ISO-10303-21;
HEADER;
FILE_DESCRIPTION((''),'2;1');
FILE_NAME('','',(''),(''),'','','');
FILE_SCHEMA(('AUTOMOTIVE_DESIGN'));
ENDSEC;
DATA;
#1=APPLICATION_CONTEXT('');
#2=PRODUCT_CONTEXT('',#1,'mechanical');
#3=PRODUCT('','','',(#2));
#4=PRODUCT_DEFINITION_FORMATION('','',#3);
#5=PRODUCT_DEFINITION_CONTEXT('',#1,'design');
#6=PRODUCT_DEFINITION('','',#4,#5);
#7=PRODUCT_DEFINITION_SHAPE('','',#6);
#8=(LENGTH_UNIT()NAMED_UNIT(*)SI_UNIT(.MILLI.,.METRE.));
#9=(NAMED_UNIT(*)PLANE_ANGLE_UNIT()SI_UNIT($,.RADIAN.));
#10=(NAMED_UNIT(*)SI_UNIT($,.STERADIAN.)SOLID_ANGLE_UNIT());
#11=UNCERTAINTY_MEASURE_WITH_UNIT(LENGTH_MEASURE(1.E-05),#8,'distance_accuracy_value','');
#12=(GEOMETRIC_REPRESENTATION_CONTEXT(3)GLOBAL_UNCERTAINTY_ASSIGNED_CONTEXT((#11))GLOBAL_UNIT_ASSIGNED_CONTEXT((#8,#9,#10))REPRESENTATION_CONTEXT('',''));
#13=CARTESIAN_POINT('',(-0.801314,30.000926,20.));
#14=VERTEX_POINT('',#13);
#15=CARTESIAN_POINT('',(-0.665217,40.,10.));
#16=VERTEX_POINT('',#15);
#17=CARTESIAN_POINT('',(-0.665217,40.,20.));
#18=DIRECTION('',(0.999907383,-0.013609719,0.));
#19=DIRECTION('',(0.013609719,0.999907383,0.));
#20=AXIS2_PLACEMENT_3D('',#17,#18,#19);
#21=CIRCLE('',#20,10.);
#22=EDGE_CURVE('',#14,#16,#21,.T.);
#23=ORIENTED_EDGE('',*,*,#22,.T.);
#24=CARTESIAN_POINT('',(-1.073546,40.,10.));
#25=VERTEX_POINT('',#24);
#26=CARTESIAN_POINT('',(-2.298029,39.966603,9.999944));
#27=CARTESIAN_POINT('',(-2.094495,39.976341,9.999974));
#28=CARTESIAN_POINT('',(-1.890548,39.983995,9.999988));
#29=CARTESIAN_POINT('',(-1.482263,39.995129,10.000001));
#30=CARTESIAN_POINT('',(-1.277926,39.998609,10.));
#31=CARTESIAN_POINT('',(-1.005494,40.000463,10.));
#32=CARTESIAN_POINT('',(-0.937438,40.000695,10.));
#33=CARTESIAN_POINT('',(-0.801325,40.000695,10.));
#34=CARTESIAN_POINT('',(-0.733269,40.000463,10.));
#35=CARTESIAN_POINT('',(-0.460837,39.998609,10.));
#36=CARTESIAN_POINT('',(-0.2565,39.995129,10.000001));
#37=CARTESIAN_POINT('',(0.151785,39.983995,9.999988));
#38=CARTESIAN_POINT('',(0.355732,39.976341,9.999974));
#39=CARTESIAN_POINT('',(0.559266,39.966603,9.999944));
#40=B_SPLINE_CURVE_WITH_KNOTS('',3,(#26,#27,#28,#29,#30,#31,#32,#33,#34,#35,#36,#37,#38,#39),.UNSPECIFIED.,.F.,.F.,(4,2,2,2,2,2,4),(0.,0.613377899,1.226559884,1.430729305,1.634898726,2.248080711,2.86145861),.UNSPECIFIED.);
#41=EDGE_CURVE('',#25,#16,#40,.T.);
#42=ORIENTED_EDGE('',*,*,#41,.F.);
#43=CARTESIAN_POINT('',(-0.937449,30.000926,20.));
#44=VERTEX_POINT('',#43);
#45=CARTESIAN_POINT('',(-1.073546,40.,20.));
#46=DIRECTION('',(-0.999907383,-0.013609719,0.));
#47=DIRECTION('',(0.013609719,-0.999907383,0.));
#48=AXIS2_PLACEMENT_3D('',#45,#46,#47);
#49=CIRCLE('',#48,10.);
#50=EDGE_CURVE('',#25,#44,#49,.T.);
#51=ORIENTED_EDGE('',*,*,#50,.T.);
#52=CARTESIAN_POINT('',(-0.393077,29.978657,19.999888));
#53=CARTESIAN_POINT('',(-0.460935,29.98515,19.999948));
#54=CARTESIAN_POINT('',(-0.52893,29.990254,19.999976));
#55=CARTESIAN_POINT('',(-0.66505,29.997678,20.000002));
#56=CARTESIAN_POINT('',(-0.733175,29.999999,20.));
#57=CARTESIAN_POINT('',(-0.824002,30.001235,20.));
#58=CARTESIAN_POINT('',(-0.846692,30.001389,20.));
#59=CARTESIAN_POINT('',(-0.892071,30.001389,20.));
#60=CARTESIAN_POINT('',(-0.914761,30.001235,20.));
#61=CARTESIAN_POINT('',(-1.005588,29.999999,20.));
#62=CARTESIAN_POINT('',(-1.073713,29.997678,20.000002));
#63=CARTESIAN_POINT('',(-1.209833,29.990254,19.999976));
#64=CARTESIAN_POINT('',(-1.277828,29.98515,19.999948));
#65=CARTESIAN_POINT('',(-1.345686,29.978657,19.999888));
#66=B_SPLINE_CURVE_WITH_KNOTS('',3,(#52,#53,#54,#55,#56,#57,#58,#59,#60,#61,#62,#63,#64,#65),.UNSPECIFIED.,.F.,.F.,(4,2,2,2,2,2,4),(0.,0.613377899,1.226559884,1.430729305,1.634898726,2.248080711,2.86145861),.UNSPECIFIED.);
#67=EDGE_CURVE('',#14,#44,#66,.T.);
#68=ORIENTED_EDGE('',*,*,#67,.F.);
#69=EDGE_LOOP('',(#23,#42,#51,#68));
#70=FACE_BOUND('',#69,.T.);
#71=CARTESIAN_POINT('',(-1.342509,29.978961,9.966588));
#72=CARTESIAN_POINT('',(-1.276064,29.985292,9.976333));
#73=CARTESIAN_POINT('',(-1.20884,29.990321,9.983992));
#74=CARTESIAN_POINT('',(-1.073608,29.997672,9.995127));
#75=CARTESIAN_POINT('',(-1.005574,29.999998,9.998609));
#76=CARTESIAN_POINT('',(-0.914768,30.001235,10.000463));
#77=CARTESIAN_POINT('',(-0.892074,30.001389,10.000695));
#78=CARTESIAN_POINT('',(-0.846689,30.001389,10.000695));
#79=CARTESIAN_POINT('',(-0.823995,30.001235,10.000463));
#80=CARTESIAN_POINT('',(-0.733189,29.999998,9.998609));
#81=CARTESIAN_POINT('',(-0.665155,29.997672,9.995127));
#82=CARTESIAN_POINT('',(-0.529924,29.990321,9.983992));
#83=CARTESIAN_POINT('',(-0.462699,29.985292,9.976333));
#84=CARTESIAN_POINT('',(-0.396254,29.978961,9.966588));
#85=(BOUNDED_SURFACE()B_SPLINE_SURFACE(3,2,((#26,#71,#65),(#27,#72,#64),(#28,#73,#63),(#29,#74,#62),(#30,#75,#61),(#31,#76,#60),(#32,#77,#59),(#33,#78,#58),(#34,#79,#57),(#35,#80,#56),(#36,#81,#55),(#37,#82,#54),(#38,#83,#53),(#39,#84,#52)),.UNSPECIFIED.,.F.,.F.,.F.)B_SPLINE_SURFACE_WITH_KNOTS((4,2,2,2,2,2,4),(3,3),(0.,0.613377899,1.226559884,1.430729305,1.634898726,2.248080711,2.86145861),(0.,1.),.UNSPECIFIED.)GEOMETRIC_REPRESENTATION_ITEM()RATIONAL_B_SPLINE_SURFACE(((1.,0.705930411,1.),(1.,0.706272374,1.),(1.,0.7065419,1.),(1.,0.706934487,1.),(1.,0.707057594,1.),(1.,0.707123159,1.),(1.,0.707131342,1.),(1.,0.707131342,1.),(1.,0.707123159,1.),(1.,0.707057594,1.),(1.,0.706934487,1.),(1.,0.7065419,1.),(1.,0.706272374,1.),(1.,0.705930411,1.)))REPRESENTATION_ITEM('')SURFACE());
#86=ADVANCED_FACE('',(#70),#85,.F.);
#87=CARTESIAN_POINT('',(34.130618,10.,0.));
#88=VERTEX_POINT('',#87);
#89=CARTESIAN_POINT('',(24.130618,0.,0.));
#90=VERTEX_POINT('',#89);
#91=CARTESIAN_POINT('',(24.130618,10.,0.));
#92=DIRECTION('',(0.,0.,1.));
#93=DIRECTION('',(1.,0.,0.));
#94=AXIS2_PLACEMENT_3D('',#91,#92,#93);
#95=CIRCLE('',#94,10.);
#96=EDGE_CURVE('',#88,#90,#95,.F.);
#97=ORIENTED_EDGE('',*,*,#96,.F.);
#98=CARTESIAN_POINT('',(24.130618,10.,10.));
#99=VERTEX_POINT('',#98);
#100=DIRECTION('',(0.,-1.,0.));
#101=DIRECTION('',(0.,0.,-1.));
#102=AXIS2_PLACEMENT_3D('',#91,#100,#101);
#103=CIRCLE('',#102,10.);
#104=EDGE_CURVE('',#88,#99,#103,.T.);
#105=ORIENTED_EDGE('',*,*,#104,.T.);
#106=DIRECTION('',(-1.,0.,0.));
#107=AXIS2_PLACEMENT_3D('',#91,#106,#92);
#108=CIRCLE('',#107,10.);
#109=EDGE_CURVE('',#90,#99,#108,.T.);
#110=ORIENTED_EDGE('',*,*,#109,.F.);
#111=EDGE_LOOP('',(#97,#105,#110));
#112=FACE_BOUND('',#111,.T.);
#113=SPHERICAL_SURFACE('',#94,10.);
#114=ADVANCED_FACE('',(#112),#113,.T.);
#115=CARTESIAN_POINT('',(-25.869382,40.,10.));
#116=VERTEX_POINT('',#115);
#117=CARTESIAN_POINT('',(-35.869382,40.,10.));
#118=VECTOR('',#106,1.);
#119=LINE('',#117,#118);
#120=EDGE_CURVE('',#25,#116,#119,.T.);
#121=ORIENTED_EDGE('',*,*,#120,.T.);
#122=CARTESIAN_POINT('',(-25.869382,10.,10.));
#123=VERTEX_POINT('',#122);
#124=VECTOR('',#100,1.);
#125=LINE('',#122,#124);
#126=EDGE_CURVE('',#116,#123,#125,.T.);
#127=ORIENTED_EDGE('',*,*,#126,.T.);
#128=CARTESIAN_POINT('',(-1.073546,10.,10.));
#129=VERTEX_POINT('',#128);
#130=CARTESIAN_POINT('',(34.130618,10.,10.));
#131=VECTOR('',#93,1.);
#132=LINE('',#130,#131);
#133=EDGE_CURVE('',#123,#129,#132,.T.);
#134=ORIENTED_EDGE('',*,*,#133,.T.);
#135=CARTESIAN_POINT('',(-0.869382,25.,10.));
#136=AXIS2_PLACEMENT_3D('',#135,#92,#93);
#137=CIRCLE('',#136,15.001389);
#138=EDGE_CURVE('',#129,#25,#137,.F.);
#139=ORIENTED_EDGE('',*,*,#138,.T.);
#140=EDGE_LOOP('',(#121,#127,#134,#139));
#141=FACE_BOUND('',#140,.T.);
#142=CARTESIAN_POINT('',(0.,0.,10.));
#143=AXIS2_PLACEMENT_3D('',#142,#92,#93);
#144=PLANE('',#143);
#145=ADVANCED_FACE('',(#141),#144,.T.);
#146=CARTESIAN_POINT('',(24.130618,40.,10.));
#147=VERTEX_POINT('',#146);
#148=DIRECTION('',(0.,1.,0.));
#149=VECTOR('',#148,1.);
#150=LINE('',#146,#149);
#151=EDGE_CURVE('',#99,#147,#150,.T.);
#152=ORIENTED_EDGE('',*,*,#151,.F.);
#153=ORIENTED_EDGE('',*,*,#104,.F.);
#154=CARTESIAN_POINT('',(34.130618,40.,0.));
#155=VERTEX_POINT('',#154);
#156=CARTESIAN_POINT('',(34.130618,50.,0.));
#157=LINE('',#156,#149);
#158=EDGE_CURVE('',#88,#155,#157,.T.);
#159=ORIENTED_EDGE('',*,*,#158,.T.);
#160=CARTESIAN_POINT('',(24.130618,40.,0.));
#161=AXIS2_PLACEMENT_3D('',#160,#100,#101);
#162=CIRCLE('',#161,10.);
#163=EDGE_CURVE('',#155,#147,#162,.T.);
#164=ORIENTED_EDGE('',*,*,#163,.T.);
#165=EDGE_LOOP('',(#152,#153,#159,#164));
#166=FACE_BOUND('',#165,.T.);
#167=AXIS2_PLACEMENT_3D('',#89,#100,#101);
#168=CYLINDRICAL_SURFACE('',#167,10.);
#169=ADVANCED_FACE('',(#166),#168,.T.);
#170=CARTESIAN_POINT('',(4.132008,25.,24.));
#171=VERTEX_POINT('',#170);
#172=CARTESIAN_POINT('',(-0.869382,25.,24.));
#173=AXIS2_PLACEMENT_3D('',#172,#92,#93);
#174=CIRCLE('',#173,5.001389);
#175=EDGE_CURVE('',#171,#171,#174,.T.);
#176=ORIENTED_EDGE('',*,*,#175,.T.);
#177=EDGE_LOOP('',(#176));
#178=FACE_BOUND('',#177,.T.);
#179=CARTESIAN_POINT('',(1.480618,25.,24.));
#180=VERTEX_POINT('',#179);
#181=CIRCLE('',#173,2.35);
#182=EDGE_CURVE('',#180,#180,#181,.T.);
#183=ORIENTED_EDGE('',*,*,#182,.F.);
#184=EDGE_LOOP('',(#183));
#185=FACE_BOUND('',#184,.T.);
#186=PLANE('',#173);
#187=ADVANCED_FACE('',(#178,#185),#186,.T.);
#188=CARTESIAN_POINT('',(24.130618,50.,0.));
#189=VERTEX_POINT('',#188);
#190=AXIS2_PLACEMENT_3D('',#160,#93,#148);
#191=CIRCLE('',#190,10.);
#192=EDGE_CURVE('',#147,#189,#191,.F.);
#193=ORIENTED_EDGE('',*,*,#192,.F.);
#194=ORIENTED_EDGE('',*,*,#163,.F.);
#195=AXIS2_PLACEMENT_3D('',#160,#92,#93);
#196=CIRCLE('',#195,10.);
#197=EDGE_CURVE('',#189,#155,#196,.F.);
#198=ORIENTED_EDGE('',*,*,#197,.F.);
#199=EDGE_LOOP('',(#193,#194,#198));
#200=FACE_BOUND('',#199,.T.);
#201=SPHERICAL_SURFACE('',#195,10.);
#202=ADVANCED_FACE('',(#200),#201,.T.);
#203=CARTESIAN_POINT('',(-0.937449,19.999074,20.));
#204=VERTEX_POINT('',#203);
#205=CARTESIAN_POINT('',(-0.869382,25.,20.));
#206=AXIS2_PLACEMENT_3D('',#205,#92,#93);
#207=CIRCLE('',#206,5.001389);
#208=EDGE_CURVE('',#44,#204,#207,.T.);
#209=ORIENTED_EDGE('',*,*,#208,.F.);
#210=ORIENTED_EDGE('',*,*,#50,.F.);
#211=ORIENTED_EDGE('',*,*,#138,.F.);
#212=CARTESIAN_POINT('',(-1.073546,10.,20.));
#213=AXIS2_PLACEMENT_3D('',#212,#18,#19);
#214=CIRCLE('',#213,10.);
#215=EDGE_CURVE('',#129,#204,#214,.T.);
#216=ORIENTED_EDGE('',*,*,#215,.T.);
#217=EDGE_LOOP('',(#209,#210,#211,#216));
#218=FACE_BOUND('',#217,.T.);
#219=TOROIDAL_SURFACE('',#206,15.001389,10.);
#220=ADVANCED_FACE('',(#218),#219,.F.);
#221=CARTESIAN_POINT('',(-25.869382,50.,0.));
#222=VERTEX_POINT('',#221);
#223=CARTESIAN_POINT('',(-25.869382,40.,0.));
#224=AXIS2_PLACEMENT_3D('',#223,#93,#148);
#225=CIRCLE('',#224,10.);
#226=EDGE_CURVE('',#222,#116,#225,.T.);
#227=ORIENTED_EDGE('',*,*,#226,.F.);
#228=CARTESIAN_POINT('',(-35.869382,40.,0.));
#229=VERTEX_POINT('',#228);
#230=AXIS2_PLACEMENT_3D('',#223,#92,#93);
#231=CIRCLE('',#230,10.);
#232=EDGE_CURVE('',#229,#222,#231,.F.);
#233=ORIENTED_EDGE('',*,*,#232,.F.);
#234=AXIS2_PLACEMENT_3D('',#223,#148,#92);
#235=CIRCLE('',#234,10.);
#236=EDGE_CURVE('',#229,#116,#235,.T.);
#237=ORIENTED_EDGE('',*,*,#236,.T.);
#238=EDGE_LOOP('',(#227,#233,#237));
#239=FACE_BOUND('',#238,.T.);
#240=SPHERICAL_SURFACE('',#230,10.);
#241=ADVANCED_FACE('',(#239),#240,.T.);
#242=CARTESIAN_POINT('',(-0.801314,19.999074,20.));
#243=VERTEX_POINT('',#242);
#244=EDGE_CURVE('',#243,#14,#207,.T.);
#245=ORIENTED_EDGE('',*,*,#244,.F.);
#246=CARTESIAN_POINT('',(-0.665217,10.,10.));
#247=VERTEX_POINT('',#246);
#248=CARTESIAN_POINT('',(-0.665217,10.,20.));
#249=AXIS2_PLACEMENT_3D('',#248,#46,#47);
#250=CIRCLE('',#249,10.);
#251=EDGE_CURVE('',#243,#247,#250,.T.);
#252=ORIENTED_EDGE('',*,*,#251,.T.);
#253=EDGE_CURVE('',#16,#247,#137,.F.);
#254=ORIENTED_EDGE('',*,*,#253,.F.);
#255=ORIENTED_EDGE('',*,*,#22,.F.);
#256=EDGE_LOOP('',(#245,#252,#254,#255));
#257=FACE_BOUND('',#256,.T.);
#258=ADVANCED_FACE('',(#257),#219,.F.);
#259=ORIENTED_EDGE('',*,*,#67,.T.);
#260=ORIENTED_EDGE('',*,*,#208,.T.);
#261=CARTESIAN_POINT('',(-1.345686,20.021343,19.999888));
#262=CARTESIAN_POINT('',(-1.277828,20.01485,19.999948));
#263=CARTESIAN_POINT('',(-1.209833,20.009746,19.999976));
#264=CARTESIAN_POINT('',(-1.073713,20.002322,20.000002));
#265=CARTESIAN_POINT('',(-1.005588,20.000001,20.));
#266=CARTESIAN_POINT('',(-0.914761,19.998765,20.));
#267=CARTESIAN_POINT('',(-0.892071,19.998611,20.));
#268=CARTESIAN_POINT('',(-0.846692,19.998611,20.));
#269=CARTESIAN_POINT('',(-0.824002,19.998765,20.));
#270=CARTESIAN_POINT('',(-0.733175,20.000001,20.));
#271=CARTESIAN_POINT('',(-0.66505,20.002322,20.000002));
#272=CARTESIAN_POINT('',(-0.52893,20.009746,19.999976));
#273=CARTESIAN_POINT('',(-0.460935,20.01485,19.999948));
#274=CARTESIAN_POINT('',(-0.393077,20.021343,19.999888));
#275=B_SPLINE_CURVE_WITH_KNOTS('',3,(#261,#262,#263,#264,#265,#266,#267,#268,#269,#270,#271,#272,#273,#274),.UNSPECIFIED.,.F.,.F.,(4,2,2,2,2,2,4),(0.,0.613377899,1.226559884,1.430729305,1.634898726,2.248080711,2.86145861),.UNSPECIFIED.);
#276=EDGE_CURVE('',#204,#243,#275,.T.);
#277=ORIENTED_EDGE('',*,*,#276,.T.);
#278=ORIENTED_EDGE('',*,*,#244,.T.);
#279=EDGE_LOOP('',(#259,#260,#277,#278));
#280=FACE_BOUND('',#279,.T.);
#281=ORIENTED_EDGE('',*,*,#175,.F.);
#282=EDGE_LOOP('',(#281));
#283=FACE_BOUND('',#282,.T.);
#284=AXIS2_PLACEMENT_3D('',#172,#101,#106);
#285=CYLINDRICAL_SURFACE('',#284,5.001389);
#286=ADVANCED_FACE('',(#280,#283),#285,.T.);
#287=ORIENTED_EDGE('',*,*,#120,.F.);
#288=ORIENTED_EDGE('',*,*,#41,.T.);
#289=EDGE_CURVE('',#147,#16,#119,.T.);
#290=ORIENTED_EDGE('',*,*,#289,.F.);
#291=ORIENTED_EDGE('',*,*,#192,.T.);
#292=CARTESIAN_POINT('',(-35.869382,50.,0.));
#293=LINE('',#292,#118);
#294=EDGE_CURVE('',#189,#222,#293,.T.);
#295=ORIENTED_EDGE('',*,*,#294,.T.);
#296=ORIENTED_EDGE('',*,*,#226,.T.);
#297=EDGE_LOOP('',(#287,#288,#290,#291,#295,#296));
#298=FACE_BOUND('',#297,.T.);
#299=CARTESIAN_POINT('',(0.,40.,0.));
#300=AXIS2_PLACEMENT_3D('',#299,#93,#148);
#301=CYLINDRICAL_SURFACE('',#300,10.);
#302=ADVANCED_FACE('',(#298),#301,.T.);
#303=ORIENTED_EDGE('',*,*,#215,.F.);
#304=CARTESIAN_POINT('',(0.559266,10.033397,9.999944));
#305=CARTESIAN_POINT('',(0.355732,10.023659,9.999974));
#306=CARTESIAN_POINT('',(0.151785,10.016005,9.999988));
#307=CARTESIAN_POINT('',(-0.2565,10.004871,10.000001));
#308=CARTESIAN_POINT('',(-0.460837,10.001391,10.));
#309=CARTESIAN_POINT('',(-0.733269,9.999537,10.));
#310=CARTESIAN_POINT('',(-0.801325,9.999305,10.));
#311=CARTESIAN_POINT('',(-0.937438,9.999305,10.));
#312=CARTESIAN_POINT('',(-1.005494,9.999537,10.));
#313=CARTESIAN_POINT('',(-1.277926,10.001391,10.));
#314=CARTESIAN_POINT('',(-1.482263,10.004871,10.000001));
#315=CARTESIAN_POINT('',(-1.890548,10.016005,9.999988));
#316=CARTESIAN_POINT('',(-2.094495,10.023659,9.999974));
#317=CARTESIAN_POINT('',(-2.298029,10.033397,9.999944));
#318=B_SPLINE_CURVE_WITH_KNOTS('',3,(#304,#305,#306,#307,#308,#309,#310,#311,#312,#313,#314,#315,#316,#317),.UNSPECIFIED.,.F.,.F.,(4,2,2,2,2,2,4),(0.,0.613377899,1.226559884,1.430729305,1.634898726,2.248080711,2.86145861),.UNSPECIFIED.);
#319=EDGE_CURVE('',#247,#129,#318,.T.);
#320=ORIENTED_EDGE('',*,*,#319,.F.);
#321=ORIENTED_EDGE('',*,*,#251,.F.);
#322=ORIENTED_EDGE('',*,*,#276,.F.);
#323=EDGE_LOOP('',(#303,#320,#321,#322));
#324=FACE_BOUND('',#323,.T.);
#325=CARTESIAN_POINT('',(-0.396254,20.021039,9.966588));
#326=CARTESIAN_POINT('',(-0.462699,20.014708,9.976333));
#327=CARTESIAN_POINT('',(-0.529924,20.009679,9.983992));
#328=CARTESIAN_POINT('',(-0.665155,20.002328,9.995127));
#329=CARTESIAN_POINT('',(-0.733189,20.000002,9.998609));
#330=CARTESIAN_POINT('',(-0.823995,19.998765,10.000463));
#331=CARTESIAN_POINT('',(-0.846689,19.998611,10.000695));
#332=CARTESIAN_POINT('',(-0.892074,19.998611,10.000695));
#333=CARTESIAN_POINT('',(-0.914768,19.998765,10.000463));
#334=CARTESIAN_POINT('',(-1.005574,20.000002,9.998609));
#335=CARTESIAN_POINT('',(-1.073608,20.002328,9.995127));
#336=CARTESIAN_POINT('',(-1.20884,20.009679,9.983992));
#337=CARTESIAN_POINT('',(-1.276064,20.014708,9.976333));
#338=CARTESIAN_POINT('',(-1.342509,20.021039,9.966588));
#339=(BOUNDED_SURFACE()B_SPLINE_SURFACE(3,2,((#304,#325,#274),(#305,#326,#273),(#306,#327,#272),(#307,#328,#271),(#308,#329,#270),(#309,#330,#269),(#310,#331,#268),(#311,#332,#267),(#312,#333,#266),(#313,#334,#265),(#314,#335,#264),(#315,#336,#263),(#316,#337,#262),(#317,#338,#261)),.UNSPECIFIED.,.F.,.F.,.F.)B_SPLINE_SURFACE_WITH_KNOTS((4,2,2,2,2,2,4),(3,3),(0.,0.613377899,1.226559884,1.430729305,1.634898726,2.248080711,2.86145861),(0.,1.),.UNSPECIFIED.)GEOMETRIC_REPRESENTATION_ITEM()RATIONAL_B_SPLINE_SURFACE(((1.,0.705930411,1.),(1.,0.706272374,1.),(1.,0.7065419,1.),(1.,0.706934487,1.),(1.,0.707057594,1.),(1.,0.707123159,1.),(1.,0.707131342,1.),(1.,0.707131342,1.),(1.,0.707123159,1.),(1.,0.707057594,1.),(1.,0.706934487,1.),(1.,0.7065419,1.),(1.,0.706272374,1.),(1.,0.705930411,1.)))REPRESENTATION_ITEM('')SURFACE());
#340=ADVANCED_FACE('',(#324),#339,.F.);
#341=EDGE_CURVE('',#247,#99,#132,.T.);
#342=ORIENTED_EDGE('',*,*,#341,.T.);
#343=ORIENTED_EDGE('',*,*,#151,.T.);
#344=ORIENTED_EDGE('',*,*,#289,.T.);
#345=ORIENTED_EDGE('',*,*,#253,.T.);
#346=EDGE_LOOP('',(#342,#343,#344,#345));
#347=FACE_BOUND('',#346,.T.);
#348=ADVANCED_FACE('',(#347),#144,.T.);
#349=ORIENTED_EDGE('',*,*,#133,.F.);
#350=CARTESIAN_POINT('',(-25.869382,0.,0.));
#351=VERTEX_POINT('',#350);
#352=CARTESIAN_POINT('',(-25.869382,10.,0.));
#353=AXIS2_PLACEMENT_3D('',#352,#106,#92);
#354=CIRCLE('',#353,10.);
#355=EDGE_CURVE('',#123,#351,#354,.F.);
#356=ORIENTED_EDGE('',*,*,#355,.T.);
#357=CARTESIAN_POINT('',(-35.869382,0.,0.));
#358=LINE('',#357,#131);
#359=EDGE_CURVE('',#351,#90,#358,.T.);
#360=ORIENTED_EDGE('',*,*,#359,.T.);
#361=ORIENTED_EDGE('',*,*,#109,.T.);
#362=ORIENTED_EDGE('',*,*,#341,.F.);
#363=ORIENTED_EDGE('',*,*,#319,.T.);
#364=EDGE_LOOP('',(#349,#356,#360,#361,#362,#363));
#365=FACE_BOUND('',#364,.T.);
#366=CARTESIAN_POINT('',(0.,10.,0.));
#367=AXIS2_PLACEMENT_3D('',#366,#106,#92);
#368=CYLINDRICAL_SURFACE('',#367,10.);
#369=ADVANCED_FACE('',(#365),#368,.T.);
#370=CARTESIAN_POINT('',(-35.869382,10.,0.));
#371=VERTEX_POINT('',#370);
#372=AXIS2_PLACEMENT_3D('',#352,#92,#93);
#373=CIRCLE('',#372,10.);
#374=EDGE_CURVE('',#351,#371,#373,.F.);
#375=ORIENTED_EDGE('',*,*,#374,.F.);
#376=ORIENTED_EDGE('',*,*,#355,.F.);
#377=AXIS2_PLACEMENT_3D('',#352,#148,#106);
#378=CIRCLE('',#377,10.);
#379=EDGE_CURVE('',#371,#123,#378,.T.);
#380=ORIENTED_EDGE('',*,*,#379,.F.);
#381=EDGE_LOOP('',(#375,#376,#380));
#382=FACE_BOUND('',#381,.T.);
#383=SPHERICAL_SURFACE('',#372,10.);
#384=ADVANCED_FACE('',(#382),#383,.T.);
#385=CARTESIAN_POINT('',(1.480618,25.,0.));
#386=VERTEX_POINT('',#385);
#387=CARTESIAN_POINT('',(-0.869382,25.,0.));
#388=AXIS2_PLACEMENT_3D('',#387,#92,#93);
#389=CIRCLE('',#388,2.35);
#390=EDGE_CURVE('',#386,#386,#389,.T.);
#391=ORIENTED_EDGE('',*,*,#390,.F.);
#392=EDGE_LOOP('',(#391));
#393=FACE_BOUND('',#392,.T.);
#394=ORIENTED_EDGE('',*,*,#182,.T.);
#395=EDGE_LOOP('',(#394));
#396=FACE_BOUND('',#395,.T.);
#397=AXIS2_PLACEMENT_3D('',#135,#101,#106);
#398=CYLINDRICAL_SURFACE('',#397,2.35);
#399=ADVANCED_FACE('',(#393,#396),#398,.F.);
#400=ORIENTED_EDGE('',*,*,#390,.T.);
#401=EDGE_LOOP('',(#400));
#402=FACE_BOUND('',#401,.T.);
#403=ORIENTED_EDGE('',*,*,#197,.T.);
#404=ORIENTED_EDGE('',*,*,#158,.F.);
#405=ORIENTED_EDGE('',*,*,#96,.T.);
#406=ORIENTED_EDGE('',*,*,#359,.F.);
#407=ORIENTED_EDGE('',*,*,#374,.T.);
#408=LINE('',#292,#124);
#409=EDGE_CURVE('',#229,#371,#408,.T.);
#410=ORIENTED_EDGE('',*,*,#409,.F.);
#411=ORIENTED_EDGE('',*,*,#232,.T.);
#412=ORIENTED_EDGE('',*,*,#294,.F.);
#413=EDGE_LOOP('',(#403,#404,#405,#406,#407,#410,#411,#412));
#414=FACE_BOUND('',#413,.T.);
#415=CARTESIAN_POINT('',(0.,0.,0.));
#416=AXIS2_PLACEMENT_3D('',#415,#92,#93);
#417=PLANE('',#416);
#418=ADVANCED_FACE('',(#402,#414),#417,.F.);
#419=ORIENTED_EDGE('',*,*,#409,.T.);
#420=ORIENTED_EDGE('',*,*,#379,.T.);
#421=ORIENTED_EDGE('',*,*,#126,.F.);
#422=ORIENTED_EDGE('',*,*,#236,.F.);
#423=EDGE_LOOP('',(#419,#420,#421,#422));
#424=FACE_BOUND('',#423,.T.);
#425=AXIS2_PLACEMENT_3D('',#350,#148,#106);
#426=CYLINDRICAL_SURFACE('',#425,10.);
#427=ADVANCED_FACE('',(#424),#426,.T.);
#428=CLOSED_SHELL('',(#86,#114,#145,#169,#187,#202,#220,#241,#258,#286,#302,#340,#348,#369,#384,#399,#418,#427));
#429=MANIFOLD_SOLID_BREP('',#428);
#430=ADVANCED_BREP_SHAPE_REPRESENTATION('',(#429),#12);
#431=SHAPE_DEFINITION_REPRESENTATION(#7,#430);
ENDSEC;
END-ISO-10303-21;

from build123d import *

# Parameters (mm, degrees)
ESBO_O1_W                = 70
ESBO_O1_H                = 50
ESBO_O1_R                = 2.35
RESSALTO_EXTRUS_O1_DEPTH = 10
ESBO_O2_R                = 5.001389376
ESBO_O2_R_2              = 2.35
RESSALTO_EXTRUS_O2_DEPTH = 24
FILETE1_R                = 10
FILETE2_R                = 10
FILETE3_R                = 10
FILETE4_R                = 10
FILETE5_R                = 10


with BuildPart() as part:
    # Esboço1 → Ressalto-extrusão1 (new body)
    with BuildSketch(Plane.XY):
        with Locations((-0.869381548, 25)):
            Rectangle(ESBO_O1_W, ESBO_O1_H)
        with Locations((-0.869381548, 25)):
            Circle(ESBO_O1_R, mode=Mode.SUBTRACT)
    extrude(amount=RESSALTO_EXTRUS_O1_DEPTH)

    # Esboço2 → Ressalto-extrusão2 (add)
    with BuildSketch(Plane.XY):
        with Locations(Location((-0.869381548, 25, 0), (0, 0, 180))):
            Circle(ESBO_O2_R)
        with Locations((-0.869381548, 25)):
            Circle(ESBO_O2_R_2, mode=Mode.SUBTRACT)
    extrude(amount=RESSALTO_EXTRUS_O2_DEPTH)

    # Filete1
    filete1_edges = [part.edges().sort_by_distance(p)[0] for p in [
        (-0.869381548, 0, 10),
    ]]
    fillet(filete1_edges, radius=FILETE1_R - 0.0001)  # a hair under: the kernel refuses the full size

    # Filete2
    filete2_edges = [part.edges().sort_by_distance(p)[0] for p in [
        (-0.869381548, 50, 10),
    ]]
    fillet(filete2_edges, radius=FILETE2_R - 0.0001)  # a hair under: the kernel refuses the full size

    # Filete3
    filete3_edges = [part.edges().sort_by_distance(p)[0] for p in [
        (-35.869381548, 2.928902899, 7.071097101),
        (-35.869381548, 25, 10),
        (-35.869381548, 47.071097101, 7.071097101),
    ]]
    fillet(filete3_edges, radius=FILETE3_R - 0.0001)  # a hair under: the kernel refuses the full size

    # Filete4
    filete4_edges = [part.edges().sort_by_distance(p)[0] for p in [
        (34.130618452, 25, 10),
        (34.130618452, 2.928902899, 7.071097101),
        (34.130618452, 47.071097101, 7.071097101),
    ]]
    fillet(filete4_edges, radius=FILETE4_R - 0.0001)  # a hair under: the kernel refuses the full size

    # Filete5
    filete5_edges = [part.edges().sort_by_distance(p)[0] for p in [
        (4.132007829, 25, 10),
    ]]
    fillet(filete5_edges, radius=FILETE5_R)


solid = part.part
